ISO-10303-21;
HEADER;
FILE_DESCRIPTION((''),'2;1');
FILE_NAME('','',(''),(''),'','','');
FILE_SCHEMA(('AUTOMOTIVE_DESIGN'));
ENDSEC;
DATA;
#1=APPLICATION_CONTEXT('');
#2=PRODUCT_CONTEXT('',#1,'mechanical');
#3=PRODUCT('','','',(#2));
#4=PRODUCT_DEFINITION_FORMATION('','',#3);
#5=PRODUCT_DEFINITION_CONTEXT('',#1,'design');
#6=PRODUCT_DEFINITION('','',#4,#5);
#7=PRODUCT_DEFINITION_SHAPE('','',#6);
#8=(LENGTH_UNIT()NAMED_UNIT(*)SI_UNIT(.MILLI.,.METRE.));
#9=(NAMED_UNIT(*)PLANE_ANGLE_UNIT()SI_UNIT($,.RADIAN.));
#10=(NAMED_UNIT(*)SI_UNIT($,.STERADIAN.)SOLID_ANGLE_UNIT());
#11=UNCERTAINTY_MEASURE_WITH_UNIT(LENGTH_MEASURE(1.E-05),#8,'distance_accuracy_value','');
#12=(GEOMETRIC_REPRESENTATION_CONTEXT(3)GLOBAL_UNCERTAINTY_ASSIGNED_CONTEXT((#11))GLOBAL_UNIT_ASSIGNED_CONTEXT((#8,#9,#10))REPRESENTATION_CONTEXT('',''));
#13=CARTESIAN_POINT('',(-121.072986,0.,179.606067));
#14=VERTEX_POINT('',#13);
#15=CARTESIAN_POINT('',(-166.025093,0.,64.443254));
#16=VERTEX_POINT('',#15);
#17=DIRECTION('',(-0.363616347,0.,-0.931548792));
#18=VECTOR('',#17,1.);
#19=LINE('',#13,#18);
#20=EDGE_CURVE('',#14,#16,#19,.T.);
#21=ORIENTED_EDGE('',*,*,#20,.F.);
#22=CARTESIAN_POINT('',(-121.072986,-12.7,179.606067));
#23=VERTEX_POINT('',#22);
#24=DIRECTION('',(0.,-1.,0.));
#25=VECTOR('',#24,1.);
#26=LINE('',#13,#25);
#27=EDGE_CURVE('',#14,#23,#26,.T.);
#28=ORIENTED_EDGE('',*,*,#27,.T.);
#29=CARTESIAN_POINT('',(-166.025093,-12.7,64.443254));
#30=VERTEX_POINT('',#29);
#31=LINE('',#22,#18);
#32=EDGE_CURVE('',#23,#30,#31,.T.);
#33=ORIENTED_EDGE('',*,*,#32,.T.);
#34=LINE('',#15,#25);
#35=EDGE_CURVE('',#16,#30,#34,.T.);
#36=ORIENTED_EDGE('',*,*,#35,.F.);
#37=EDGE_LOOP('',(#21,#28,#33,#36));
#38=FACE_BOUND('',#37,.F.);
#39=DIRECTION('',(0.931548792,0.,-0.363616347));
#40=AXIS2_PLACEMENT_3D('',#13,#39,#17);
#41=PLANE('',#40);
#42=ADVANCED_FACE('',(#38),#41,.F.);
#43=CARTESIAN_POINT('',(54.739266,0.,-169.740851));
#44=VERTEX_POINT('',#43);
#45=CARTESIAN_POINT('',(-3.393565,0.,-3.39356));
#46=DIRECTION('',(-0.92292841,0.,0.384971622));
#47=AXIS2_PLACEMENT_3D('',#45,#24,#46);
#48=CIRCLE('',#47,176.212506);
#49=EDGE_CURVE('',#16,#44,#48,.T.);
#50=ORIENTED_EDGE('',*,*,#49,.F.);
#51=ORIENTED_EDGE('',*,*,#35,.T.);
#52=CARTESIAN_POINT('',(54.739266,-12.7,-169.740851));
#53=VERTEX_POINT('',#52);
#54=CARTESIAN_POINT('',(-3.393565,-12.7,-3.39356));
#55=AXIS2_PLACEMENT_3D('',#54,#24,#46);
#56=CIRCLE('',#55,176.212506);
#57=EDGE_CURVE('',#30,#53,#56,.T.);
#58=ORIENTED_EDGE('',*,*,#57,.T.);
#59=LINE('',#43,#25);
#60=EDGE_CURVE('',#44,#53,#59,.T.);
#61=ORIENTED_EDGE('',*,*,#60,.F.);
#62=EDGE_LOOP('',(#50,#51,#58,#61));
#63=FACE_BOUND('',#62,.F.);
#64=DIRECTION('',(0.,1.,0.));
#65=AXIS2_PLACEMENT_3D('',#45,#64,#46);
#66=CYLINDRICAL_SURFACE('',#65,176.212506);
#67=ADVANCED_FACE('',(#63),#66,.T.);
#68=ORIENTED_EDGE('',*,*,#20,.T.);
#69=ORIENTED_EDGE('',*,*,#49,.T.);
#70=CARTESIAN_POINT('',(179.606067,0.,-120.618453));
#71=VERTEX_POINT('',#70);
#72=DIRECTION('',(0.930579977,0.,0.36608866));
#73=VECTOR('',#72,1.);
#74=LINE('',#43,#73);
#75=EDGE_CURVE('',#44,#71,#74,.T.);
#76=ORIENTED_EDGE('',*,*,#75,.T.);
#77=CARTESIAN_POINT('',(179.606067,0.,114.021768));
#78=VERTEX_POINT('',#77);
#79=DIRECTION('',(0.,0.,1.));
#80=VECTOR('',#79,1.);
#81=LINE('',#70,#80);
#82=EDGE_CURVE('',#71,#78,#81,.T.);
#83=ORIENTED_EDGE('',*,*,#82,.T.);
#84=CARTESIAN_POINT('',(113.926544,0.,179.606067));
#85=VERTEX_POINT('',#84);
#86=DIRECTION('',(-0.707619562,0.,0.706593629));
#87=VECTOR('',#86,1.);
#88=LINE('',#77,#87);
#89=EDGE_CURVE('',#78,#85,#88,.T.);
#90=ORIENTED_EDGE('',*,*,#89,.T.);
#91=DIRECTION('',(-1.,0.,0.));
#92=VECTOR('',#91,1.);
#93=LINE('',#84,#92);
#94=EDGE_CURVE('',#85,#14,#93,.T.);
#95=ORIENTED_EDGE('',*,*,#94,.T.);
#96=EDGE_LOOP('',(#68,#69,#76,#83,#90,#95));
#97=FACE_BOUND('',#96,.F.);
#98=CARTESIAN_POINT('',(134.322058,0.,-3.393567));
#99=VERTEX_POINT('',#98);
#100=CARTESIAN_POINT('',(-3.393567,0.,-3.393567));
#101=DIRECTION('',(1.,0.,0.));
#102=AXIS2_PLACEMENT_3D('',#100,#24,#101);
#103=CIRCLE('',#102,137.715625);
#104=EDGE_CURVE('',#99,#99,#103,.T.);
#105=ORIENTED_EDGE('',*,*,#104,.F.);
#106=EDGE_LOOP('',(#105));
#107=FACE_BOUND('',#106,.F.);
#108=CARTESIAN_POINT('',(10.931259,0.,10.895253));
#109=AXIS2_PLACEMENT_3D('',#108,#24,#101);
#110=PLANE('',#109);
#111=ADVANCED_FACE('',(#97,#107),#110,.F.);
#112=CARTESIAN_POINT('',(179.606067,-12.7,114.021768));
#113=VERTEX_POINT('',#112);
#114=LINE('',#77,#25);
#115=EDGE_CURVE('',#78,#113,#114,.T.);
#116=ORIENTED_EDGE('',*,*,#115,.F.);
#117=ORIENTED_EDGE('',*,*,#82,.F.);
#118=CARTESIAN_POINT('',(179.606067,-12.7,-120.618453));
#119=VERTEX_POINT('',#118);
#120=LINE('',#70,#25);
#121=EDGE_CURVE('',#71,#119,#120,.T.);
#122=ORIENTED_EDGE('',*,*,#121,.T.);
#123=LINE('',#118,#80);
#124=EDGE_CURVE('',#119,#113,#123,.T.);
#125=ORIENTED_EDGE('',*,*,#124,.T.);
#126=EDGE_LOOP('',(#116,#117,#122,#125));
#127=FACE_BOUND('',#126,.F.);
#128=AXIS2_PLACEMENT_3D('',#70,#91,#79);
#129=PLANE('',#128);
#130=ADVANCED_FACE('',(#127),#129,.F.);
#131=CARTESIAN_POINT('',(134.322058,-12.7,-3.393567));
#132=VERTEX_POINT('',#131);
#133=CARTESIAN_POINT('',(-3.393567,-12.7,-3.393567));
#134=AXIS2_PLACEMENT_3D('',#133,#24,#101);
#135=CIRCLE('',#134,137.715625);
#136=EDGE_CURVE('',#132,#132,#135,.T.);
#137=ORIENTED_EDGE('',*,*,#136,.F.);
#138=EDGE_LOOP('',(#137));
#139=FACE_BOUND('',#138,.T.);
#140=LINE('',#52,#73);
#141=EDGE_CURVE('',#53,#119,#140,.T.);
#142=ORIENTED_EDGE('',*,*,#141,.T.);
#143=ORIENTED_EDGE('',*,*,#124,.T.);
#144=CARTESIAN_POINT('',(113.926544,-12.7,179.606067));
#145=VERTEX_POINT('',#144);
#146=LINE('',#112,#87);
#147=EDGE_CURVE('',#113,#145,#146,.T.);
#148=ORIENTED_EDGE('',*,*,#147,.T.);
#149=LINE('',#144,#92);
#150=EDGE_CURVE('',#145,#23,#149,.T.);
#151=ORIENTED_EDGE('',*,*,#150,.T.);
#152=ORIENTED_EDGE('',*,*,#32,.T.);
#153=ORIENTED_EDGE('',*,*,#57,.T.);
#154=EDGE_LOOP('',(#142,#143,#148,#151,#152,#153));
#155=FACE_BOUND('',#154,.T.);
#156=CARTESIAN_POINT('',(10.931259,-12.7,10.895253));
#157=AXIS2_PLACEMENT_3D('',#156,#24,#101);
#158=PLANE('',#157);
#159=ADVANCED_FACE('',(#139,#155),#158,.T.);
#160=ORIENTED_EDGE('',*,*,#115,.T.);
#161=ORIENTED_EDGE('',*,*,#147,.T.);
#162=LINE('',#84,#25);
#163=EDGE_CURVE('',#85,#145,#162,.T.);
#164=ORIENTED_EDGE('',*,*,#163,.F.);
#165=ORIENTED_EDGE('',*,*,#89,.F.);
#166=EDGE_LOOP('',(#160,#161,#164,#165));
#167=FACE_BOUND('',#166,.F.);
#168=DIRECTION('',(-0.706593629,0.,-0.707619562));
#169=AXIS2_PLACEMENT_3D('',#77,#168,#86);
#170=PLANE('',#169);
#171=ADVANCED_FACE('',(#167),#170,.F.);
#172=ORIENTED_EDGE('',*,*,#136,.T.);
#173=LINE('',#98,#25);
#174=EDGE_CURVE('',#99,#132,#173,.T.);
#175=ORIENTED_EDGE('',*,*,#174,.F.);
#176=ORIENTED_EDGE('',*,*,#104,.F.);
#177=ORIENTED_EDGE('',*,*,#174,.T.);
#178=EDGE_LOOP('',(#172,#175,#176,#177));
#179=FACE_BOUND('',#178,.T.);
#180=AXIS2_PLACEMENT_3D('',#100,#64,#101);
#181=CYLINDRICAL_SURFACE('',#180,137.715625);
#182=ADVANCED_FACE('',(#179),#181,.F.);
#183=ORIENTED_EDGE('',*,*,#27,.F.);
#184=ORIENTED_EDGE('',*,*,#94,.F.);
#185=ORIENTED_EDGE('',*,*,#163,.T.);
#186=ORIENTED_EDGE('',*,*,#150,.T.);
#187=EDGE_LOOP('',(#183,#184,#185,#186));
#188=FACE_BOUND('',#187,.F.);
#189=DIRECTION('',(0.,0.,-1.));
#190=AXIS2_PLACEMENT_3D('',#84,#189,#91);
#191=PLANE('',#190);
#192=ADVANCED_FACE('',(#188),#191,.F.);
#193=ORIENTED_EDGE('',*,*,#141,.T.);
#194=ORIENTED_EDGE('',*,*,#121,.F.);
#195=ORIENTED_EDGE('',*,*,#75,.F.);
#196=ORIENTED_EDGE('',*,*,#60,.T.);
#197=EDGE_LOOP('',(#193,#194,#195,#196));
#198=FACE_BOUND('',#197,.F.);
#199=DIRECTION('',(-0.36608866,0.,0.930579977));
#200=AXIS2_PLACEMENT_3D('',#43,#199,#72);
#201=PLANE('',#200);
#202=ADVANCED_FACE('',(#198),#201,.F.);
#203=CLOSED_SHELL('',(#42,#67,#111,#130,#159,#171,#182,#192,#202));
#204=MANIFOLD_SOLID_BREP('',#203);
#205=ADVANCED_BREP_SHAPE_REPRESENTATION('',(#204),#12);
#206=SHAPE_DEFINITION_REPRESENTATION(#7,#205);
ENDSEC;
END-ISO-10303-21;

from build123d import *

# Parameters (mm, degrees)
F0_R     = 137.715625
F1_DEPTH = 12.7


# Not quite as in the source:
# - ends of sketch curves that miss each other by under 0.0002 mm in the source are joined


with BuildPart() as f1:
    # F0 (on Front) → F1 (new body)
    with BuildSketch(Plane.XZ):
        with BuildLine():
            Line((113.9265438, 179.606067), (-121.0729862, 179.606067))
            Line((-121.0729862, 179.606067), (-166.0250934, 64.4432544))
            ThreePointArc((-166.0250934, 64.4432544), (-131.6142451705, -124.2666526964), (54.7392664722, -169.7408508033))
            Line((54.7392664722, -169.7408508033), (179.606067, -120.6184532))
            Line((179.606067, -120.6184532), (179.606067, 114.0217684))
            Line((179.606067, 114.0217684), (113.9265438, 179.606067))
        make_face()
        with Locations((-3.393567, -3.393567)):
            Circle(F0_R, mode=Mode.SUBTRACT)
    extrude(amount=F1_DEPTH)


solid = f1.part
